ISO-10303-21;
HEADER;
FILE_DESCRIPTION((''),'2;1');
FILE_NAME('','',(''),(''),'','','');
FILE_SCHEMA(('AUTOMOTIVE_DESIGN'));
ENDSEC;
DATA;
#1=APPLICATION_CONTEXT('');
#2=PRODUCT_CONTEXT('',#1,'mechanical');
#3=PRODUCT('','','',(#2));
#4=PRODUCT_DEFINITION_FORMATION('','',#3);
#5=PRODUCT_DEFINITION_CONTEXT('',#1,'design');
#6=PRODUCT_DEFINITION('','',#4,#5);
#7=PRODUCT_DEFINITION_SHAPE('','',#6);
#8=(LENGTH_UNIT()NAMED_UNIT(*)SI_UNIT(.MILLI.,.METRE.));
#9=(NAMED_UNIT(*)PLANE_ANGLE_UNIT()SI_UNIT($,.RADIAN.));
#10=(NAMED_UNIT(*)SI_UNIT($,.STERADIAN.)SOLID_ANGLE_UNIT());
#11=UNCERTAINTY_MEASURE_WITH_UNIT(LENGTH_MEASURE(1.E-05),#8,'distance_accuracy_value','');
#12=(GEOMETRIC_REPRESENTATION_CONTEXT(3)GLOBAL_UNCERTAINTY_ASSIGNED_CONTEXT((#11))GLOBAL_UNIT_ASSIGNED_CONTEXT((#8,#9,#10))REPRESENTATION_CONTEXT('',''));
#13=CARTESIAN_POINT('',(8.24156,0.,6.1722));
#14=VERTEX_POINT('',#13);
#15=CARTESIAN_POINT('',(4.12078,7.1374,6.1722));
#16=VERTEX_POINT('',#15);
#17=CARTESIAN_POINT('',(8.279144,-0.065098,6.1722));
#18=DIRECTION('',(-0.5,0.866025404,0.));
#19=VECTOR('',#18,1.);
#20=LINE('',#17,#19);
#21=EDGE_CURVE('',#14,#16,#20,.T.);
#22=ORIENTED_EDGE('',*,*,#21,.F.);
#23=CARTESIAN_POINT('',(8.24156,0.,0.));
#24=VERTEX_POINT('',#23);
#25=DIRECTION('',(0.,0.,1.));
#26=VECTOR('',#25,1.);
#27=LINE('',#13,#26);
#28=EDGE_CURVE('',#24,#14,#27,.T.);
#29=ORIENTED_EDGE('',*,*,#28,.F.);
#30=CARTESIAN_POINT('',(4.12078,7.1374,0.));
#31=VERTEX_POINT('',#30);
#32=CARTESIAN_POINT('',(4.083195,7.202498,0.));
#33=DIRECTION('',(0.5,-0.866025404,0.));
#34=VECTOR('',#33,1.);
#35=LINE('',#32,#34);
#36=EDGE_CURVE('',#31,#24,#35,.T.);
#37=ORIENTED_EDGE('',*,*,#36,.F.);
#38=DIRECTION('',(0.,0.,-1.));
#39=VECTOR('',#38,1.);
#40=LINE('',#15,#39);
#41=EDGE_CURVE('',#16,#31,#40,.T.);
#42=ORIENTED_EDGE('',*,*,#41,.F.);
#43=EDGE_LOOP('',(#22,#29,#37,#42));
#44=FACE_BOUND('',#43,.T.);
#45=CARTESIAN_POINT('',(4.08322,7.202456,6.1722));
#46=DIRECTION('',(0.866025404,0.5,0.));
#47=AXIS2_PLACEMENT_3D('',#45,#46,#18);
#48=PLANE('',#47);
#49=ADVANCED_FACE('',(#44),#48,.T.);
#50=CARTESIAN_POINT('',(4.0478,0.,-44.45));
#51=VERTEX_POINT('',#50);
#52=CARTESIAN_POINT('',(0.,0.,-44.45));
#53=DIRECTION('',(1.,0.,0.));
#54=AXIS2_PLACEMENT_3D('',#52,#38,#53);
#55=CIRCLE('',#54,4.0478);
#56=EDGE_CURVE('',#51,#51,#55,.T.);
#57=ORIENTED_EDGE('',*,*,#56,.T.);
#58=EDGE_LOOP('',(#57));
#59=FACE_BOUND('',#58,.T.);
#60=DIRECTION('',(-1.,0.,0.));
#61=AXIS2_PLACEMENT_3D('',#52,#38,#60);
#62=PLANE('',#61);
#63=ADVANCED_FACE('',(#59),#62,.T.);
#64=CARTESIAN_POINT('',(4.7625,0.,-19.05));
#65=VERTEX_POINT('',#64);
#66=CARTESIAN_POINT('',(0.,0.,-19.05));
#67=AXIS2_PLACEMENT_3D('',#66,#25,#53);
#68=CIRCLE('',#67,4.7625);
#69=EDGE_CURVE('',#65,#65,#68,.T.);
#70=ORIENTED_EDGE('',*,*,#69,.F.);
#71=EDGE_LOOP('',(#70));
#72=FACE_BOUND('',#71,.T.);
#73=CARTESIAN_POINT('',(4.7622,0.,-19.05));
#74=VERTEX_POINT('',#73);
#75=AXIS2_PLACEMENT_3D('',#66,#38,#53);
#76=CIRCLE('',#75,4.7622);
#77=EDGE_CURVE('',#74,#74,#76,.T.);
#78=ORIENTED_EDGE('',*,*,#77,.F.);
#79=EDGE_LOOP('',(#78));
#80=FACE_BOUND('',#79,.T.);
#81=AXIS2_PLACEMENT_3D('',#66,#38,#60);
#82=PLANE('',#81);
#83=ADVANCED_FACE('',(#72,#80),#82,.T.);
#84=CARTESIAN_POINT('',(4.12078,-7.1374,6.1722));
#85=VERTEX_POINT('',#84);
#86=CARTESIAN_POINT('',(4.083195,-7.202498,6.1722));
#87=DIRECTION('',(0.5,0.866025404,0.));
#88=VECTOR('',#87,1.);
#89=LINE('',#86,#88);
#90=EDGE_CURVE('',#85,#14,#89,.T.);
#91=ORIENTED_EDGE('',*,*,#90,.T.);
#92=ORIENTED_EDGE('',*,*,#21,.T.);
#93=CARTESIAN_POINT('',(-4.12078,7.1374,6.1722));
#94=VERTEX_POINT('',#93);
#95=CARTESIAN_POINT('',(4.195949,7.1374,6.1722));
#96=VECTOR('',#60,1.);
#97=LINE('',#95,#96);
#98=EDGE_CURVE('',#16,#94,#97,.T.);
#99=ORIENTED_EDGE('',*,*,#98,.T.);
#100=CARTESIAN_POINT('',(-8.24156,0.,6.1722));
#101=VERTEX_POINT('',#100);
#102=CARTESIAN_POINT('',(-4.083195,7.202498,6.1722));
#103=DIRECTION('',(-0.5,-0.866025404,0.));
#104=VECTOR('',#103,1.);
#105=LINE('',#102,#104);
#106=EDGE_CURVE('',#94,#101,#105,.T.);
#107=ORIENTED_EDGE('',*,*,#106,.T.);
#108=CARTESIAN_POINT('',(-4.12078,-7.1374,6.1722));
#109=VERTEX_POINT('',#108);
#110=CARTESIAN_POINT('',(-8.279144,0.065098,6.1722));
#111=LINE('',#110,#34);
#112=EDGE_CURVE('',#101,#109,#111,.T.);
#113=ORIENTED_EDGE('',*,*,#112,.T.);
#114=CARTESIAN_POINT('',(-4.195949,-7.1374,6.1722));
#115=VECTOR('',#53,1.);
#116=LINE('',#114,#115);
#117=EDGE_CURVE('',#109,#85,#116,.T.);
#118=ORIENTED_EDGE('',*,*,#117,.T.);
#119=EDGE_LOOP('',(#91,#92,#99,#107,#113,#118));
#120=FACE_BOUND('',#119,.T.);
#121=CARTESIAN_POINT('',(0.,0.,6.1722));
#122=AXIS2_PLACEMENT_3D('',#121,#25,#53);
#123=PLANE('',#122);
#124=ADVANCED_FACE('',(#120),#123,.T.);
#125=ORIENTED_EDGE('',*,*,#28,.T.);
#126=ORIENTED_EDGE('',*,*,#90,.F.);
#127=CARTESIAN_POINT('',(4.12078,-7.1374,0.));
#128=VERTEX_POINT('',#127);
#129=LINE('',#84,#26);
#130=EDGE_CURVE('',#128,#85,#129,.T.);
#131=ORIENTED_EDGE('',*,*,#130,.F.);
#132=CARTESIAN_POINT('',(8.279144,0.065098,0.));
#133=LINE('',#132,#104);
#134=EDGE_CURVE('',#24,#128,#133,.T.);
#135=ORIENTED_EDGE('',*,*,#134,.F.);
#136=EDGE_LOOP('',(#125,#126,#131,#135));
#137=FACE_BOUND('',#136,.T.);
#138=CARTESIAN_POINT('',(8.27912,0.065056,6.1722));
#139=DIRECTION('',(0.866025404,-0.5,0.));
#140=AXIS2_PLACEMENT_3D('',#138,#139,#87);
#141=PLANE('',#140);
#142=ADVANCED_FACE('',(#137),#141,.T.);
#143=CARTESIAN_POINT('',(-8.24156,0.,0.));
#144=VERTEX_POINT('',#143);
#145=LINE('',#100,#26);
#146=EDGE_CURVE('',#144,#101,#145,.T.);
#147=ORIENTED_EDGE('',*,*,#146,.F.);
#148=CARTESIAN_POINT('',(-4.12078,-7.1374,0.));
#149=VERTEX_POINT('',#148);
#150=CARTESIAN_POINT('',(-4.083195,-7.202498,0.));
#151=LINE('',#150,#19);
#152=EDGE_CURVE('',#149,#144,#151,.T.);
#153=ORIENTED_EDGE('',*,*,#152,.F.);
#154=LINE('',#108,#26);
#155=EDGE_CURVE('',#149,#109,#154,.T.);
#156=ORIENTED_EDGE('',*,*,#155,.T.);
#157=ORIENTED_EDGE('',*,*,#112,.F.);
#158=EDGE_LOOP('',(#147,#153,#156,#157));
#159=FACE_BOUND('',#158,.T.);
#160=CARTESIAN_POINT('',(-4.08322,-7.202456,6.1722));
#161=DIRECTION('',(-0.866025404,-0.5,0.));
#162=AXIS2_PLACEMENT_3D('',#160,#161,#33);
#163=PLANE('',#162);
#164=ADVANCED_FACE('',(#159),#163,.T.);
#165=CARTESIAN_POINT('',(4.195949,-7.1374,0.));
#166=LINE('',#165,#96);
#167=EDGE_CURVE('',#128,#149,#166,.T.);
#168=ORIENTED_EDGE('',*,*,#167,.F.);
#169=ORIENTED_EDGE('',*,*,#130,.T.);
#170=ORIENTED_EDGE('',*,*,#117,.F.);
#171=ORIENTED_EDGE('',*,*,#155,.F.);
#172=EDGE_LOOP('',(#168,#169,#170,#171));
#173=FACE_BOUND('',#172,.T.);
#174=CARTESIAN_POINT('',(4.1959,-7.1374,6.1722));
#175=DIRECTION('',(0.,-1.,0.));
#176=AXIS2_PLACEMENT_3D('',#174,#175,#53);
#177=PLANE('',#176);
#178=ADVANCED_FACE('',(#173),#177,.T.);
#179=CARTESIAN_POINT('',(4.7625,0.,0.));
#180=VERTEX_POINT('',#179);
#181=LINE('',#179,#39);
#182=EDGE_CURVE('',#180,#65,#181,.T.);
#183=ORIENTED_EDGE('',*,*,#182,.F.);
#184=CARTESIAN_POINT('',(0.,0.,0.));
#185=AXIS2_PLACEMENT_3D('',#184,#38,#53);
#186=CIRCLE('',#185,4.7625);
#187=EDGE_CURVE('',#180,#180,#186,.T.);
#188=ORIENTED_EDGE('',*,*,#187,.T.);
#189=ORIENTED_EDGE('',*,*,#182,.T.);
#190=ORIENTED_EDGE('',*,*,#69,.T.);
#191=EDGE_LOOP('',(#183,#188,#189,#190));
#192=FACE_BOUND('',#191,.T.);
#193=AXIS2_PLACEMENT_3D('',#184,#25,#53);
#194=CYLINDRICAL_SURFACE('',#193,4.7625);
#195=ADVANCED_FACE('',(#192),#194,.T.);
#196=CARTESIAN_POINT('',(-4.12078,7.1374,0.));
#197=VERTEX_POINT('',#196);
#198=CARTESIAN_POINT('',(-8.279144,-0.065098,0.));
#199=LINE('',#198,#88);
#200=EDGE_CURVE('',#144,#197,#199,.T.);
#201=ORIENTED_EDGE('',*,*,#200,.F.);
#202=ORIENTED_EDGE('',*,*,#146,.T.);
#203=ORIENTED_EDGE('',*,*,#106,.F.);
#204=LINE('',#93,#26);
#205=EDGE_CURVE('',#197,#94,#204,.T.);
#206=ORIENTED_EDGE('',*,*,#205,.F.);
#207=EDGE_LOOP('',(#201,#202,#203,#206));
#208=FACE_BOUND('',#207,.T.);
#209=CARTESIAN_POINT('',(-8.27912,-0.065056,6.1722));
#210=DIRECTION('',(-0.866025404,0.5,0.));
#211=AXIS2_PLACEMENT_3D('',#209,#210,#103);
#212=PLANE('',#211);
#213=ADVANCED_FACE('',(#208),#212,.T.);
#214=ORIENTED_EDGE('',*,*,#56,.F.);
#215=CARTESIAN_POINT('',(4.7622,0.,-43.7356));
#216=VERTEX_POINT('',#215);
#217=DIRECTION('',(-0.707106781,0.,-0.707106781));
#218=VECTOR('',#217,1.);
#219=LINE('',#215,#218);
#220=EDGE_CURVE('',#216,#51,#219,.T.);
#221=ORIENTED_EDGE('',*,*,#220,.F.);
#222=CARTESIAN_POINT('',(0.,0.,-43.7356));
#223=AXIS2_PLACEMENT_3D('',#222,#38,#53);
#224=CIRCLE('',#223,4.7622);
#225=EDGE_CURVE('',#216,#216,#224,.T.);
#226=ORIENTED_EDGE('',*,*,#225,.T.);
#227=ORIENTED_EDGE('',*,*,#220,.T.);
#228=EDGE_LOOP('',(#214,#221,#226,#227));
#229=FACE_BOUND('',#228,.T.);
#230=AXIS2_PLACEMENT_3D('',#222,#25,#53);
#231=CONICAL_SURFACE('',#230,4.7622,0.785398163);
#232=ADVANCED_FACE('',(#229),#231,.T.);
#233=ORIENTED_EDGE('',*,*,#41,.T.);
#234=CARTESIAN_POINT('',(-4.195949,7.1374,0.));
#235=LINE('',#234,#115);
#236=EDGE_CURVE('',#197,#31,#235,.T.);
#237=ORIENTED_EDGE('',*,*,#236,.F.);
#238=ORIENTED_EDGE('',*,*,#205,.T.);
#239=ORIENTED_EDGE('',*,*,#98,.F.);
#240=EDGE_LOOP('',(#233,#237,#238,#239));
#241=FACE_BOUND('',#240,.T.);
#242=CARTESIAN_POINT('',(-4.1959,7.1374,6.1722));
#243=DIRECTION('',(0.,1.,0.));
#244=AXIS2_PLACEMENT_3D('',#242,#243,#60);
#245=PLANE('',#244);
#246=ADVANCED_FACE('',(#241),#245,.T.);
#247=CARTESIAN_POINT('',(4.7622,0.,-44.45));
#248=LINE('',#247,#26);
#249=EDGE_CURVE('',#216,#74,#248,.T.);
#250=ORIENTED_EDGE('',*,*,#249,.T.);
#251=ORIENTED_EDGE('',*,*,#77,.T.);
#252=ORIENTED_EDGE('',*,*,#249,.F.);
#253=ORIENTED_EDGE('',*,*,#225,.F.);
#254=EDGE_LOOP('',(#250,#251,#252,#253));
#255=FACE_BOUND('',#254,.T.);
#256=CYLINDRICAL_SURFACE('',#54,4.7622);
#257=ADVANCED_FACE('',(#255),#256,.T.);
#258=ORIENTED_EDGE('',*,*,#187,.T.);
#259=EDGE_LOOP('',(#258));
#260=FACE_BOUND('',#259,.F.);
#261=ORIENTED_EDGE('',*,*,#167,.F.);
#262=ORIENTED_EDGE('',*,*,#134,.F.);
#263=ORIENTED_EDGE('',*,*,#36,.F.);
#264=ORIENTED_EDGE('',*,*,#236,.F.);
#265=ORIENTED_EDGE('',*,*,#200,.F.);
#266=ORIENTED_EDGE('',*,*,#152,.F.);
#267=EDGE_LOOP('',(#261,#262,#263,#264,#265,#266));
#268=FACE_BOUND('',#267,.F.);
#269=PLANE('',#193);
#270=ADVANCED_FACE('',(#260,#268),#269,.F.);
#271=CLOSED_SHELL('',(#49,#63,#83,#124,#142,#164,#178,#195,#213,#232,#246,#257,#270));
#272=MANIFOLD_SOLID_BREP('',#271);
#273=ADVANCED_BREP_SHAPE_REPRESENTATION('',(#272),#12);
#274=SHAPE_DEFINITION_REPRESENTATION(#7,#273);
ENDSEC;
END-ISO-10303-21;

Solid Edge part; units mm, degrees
sketch "Sketch1" plane through (0, 0, 0) normal (0, 0, 1) x (1, 0, 0)
  circle A0 centre (0, 0) radius 8.2794
  dimension "D1" = 16.5588
extrude "Protrusion1" add sketch "Sketch1" along normal blind 6.1722
sketch "Sketch2" plane through (0, 0, 0) normal (0, 0, -1) x (1, 0, 0)
  circle A0 centre (0, 0) radius 4.7625
extrude "Protrusion2" add sketch "Sketch2" along normal blind 44.45
sketch "Sketch3" plane through (0, 0, -44.45) normal (0, 0, -1) x (1, 0, 0)
  circle A0 centre (0, 0) radius 4.7622
extrude "Cutout1" cut sketch "Sketch3" against normal blind 25.4 flip side to cut
chamfer "Chamfer_1" distance 0.7144 angle 45 1 edges at (-4.7622, 0, -44.45)
sketch "Sketch4" plane through (0, 0, 6.1722) normal (0, 0, 1) x (1, 0, 0)
  line L0 (-4.1959, 7.1374) -> (4.1959, 7.1374)
  dimension "D1" = 14.2748
extrude "Cutout2" cut sketch "Sketch4" against normal up to next material side at (0, 7.1874, 6.1722)
pattern_circular "Pattern1" count 6 over 360 about axis through (0, 0, 6.1722) along (0, 0, 1) of "Cutout2"
properties part number "24106178"
